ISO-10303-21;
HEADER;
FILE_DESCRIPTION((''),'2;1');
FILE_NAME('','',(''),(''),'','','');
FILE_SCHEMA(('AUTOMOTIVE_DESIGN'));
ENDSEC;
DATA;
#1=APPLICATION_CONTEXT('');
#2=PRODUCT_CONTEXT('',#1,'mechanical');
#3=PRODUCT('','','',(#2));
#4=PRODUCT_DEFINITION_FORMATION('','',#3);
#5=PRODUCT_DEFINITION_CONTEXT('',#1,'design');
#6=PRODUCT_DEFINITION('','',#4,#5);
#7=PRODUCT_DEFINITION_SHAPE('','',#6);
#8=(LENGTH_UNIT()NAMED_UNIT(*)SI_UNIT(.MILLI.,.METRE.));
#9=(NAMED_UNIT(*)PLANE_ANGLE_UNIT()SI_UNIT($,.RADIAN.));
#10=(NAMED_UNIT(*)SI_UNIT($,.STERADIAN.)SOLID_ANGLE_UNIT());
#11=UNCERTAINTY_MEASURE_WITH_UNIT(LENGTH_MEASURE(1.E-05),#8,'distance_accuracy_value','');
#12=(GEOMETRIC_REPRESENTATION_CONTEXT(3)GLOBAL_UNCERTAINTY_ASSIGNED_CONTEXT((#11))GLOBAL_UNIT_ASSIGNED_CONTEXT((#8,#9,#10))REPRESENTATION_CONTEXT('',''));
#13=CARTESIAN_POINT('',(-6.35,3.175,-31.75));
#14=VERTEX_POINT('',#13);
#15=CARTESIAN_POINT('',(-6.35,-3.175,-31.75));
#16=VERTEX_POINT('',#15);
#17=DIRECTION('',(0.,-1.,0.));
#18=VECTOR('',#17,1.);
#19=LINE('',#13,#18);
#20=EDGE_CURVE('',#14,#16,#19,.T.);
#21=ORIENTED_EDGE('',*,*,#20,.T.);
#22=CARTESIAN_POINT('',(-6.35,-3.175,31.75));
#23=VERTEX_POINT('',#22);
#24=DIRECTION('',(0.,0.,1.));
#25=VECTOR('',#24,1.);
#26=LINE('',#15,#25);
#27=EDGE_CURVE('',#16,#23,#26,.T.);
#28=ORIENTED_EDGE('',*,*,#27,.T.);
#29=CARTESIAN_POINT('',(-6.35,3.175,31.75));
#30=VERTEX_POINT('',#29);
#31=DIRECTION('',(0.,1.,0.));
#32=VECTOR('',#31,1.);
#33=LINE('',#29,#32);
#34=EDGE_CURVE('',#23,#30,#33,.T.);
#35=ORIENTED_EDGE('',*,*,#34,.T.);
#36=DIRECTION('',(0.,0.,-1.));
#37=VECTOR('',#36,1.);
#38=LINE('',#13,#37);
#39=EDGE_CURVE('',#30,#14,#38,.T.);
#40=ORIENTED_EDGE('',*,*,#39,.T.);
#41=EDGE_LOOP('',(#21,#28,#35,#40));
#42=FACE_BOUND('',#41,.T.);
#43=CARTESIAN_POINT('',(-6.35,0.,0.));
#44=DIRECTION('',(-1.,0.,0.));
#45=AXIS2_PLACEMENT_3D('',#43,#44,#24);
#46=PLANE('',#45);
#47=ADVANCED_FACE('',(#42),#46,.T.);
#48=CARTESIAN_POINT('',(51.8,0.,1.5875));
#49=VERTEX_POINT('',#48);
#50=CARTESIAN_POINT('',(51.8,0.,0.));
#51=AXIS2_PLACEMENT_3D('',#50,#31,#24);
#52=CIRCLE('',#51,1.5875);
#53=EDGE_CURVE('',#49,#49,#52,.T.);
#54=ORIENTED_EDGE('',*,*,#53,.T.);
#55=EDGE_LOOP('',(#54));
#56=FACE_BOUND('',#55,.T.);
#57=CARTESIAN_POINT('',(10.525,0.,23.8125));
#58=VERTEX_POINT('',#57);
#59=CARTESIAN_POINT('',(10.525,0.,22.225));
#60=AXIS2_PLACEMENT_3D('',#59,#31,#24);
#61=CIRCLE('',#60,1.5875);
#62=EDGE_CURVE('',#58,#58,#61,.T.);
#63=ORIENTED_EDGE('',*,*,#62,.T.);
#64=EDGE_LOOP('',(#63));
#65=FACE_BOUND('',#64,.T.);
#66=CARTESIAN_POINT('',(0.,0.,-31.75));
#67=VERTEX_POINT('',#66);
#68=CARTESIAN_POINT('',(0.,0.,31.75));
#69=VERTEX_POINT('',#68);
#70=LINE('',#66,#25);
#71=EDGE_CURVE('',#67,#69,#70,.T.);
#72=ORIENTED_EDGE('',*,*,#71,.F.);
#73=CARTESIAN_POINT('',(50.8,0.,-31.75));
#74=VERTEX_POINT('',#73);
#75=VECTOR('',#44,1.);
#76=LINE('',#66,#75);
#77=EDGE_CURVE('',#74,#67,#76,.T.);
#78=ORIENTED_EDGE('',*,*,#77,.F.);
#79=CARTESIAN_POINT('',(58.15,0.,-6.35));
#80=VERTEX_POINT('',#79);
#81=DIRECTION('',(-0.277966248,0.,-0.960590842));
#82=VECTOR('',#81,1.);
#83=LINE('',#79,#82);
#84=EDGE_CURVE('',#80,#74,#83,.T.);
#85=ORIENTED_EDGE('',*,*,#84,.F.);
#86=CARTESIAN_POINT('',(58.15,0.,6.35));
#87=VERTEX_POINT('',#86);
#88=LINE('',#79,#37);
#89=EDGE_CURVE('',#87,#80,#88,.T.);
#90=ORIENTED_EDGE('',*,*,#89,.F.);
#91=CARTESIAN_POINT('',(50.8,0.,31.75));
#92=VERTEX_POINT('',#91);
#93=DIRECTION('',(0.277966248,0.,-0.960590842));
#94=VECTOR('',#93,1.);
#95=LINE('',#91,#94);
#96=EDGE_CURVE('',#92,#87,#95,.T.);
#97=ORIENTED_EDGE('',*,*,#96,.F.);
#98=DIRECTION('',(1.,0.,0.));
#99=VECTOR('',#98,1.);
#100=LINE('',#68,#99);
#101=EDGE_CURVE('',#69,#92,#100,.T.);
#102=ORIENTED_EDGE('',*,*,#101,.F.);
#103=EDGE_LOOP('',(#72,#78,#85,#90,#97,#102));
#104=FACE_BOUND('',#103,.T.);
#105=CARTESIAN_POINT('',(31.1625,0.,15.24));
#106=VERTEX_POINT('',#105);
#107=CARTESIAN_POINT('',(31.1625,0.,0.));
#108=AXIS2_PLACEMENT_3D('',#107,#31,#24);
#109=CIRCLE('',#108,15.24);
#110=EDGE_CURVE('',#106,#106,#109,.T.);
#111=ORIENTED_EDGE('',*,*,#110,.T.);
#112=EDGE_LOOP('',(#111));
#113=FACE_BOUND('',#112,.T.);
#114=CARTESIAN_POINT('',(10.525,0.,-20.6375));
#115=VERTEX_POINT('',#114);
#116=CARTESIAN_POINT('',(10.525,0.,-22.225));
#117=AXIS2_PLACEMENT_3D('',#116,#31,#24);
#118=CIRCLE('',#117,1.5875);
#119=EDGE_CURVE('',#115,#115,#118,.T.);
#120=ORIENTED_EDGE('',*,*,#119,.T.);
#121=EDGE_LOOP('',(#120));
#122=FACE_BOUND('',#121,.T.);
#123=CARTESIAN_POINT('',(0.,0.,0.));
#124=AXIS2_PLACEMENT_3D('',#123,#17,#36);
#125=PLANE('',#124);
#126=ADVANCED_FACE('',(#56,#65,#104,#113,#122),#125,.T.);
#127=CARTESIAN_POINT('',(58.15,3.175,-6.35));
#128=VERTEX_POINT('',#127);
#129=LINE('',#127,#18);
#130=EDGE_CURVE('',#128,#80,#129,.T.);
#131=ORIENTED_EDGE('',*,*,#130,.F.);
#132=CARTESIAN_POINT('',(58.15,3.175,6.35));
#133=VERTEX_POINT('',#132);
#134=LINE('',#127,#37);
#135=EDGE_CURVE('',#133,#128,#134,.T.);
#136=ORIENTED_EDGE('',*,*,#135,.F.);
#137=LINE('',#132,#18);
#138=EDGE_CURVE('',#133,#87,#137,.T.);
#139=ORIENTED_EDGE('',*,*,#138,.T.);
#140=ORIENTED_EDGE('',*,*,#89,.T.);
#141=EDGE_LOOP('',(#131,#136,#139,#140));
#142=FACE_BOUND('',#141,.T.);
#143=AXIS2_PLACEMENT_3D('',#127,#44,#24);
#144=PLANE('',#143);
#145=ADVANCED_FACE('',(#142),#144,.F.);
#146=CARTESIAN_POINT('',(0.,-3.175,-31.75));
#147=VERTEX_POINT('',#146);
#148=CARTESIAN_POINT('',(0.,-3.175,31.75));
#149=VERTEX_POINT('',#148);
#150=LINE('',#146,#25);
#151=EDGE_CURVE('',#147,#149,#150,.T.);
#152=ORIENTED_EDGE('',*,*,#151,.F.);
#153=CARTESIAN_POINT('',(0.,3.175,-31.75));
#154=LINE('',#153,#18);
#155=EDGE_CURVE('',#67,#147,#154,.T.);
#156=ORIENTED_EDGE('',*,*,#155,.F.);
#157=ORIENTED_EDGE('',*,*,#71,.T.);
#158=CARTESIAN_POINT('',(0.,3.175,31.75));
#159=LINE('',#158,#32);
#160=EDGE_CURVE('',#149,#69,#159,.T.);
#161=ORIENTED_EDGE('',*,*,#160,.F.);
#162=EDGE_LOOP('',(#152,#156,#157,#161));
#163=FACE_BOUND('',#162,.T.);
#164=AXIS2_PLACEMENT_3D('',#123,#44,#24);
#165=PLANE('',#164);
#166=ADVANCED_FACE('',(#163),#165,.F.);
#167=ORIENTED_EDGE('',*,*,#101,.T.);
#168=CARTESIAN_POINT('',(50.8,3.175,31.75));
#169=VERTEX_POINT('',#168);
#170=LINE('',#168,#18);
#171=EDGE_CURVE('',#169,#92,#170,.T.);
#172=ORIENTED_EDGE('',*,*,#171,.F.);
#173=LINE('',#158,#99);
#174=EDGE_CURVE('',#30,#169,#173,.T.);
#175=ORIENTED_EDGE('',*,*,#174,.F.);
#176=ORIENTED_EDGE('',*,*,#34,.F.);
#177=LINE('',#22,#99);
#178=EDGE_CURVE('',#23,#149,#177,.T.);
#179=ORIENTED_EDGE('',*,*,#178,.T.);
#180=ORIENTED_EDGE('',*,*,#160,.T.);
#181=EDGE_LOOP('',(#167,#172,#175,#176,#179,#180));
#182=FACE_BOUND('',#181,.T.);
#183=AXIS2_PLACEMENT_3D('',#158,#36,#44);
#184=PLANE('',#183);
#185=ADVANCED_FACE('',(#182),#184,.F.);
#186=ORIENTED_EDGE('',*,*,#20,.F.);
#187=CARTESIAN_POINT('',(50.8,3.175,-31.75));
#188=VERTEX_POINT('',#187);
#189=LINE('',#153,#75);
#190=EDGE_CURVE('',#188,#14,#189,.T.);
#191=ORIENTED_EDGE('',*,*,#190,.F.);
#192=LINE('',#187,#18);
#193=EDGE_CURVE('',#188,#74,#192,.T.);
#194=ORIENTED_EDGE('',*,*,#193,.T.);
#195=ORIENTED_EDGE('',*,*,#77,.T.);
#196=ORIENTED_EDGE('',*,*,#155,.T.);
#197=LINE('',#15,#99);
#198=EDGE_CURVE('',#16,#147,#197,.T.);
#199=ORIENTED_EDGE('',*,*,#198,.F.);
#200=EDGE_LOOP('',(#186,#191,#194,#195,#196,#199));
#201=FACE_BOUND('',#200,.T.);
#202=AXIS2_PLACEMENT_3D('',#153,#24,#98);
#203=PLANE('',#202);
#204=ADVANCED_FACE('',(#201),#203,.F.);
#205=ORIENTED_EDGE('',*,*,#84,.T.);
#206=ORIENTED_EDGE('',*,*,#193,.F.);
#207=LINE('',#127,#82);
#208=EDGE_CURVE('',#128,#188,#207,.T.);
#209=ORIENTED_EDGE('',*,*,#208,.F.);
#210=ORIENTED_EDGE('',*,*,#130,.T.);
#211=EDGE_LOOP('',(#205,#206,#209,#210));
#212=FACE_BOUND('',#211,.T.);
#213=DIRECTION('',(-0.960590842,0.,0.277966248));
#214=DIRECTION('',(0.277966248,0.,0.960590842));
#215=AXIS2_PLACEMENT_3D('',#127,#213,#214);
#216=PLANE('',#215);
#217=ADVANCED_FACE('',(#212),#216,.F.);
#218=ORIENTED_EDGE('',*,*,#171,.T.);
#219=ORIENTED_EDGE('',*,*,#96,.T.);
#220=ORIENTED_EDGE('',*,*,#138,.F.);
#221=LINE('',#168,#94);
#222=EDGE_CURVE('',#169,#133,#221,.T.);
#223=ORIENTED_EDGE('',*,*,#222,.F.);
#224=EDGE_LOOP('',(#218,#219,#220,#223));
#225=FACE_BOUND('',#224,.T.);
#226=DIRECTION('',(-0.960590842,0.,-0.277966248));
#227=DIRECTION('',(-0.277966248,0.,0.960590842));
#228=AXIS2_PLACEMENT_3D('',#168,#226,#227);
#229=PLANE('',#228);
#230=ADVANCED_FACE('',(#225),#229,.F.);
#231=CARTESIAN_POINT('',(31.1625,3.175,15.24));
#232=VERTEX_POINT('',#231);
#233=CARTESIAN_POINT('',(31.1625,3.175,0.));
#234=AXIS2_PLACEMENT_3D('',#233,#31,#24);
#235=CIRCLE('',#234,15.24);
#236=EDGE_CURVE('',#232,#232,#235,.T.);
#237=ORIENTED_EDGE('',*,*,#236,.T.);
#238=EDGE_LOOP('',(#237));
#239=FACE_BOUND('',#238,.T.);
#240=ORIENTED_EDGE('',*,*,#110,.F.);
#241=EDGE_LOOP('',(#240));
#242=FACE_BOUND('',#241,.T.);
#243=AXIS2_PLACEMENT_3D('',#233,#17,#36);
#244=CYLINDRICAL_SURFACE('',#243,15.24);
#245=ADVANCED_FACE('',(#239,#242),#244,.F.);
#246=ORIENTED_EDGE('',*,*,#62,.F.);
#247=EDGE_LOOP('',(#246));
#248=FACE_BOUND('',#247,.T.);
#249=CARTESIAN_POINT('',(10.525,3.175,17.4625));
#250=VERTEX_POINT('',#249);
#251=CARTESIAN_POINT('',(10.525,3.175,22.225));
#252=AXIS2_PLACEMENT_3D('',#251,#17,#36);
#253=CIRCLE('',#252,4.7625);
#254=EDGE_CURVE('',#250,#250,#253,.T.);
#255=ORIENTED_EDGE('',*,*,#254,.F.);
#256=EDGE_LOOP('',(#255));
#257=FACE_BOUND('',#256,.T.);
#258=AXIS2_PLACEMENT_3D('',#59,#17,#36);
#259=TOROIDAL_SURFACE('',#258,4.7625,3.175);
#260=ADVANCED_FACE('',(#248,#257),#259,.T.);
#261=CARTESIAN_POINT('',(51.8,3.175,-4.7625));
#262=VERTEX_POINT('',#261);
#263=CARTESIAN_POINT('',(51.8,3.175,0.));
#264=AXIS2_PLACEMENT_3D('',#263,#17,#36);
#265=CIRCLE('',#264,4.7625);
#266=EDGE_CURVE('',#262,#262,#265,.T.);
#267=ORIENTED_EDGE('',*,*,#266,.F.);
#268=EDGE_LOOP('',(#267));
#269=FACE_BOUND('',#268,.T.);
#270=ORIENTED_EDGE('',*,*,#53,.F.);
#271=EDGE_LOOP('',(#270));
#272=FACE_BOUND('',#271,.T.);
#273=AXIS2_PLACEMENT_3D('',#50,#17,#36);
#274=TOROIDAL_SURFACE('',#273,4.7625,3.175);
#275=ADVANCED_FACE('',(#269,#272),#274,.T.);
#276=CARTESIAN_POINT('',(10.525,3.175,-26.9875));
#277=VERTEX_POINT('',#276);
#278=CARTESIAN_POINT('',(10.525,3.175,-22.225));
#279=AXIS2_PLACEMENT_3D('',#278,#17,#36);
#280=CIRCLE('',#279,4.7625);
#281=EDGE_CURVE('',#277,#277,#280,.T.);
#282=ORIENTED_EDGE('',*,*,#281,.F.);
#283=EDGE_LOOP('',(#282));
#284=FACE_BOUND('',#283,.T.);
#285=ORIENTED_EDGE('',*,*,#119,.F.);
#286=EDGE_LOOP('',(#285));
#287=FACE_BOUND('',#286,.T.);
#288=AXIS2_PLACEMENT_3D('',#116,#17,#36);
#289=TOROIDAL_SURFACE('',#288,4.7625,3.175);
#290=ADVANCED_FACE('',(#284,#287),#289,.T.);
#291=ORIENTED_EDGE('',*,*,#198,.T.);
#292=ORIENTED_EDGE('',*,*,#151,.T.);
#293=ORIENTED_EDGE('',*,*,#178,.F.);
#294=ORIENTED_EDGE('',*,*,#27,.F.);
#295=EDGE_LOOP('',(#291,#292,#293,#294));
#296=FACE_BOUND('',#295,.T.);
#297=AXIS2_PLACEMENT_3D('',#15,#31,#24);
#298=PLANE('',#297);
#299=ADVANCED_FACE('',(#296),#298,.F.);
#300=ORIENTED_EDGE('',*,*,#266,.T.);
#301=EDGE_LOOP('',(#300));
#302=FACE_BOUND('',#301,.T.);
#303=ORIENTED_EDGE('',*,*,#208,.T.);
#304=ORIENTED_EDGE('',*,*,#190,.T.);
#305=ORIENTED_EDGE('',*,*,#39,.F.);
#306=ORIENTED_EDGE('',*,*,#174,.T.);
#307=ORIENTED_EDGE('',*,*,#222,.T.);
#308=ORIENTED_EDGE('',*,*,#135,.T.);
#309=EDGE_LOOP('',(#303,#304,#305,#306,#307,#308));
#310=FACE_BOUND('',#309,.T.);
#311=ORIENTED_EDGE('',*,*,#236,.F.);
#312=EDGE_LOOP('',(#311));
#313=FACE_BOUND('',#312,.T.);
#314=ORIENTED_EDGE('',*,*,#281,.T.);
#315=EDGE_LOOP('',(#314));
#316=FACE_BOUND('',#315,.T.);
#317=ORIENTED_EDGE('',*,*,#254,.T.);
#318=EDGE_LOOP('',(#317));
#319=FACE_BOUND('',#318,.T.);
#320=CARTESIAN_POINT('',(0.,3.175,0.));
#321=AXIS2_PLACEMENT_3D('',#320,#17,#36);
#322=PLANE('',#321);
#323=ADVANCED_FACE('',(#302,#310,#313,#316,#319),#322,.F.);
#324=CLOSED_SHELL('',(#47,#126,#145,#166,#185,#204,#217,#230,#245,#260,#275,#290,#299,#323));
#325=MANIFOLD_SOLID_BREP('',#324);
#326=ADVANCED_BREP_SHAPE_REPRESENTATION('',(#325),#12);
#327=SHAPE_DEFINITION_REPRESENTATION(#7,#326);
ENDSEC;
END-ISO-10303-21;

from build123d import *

# Parameters (mm, degrees)
SKETCH3_R           = 1.5875
SKETCH3_R_2         = 15.24
BOSS_EXTRUDE1_DEPTH = 3.175
SKETCH4_W           = 63.5
SKETCH4_H           = 6.35
BOSS_EXTRUDE2_DEPTH = 6.35
FILLET1_R           = 3.175


with BuildPart() as part:
    # Sketch3 → Boss-Extrude1 (new body)
    with BuildSketch(Plane(origin=(0, 0, 0), x_dir=(1, 0, 0), z_dir=(0, 1, 0))):
        Polygon((0, 31.75), (0, -31.75), (50.8, -31.75), (58.15, -6.35), (58.15, 6.35), (50.8, 31.75), align=None)
        with Locations(Location((51.8, 0, 0), (0, 0, 270))):
            Circle(SKETCH3_R, mode=Mode.SUBTRACT)
        with Locations(Location((10.525, 22.225, 0), (0, 0, 270))):
            Circle(SKETCH3_R, mode=Mode.SUBTRACT)
        with Locations(Location((10.525, -22.225, 0), (0, 0, 270))):
            Circle(SKETCH3_R, mode=Mode.SUBTRACT)
        with Locations(Location((31.1625, 0, 0), (0, 0, 270))):
            Circle(SKETCH3_R_2, mode=Mode.SUBTRACT)
    extrude(amount=BOSS_EXTRUDE1_DEPTH)

    # Sketch4 → Boss-Extrude2 (add)
    with BuildSketch(Plane.ZY):
        Rectangle(SKETCH4_W, SKETCH4_H)
    extrude(amount=BOSS_EXTRUDE2_DEPTH)

    # Fillet1
    fillet1_edges = [part.edges().sort_by_distance(p)[0] for p in [
        (10.525, 3.175, -23.8125),
        (10.525, 3.175, 20.6375),
        (51.8, 3.175, -1.5875),
    ]]
    fillet(fillet1_edges, radius=FILLET1_R - 0.0001)  # a hair under: the kernel refuses the full size


solid = part.part
